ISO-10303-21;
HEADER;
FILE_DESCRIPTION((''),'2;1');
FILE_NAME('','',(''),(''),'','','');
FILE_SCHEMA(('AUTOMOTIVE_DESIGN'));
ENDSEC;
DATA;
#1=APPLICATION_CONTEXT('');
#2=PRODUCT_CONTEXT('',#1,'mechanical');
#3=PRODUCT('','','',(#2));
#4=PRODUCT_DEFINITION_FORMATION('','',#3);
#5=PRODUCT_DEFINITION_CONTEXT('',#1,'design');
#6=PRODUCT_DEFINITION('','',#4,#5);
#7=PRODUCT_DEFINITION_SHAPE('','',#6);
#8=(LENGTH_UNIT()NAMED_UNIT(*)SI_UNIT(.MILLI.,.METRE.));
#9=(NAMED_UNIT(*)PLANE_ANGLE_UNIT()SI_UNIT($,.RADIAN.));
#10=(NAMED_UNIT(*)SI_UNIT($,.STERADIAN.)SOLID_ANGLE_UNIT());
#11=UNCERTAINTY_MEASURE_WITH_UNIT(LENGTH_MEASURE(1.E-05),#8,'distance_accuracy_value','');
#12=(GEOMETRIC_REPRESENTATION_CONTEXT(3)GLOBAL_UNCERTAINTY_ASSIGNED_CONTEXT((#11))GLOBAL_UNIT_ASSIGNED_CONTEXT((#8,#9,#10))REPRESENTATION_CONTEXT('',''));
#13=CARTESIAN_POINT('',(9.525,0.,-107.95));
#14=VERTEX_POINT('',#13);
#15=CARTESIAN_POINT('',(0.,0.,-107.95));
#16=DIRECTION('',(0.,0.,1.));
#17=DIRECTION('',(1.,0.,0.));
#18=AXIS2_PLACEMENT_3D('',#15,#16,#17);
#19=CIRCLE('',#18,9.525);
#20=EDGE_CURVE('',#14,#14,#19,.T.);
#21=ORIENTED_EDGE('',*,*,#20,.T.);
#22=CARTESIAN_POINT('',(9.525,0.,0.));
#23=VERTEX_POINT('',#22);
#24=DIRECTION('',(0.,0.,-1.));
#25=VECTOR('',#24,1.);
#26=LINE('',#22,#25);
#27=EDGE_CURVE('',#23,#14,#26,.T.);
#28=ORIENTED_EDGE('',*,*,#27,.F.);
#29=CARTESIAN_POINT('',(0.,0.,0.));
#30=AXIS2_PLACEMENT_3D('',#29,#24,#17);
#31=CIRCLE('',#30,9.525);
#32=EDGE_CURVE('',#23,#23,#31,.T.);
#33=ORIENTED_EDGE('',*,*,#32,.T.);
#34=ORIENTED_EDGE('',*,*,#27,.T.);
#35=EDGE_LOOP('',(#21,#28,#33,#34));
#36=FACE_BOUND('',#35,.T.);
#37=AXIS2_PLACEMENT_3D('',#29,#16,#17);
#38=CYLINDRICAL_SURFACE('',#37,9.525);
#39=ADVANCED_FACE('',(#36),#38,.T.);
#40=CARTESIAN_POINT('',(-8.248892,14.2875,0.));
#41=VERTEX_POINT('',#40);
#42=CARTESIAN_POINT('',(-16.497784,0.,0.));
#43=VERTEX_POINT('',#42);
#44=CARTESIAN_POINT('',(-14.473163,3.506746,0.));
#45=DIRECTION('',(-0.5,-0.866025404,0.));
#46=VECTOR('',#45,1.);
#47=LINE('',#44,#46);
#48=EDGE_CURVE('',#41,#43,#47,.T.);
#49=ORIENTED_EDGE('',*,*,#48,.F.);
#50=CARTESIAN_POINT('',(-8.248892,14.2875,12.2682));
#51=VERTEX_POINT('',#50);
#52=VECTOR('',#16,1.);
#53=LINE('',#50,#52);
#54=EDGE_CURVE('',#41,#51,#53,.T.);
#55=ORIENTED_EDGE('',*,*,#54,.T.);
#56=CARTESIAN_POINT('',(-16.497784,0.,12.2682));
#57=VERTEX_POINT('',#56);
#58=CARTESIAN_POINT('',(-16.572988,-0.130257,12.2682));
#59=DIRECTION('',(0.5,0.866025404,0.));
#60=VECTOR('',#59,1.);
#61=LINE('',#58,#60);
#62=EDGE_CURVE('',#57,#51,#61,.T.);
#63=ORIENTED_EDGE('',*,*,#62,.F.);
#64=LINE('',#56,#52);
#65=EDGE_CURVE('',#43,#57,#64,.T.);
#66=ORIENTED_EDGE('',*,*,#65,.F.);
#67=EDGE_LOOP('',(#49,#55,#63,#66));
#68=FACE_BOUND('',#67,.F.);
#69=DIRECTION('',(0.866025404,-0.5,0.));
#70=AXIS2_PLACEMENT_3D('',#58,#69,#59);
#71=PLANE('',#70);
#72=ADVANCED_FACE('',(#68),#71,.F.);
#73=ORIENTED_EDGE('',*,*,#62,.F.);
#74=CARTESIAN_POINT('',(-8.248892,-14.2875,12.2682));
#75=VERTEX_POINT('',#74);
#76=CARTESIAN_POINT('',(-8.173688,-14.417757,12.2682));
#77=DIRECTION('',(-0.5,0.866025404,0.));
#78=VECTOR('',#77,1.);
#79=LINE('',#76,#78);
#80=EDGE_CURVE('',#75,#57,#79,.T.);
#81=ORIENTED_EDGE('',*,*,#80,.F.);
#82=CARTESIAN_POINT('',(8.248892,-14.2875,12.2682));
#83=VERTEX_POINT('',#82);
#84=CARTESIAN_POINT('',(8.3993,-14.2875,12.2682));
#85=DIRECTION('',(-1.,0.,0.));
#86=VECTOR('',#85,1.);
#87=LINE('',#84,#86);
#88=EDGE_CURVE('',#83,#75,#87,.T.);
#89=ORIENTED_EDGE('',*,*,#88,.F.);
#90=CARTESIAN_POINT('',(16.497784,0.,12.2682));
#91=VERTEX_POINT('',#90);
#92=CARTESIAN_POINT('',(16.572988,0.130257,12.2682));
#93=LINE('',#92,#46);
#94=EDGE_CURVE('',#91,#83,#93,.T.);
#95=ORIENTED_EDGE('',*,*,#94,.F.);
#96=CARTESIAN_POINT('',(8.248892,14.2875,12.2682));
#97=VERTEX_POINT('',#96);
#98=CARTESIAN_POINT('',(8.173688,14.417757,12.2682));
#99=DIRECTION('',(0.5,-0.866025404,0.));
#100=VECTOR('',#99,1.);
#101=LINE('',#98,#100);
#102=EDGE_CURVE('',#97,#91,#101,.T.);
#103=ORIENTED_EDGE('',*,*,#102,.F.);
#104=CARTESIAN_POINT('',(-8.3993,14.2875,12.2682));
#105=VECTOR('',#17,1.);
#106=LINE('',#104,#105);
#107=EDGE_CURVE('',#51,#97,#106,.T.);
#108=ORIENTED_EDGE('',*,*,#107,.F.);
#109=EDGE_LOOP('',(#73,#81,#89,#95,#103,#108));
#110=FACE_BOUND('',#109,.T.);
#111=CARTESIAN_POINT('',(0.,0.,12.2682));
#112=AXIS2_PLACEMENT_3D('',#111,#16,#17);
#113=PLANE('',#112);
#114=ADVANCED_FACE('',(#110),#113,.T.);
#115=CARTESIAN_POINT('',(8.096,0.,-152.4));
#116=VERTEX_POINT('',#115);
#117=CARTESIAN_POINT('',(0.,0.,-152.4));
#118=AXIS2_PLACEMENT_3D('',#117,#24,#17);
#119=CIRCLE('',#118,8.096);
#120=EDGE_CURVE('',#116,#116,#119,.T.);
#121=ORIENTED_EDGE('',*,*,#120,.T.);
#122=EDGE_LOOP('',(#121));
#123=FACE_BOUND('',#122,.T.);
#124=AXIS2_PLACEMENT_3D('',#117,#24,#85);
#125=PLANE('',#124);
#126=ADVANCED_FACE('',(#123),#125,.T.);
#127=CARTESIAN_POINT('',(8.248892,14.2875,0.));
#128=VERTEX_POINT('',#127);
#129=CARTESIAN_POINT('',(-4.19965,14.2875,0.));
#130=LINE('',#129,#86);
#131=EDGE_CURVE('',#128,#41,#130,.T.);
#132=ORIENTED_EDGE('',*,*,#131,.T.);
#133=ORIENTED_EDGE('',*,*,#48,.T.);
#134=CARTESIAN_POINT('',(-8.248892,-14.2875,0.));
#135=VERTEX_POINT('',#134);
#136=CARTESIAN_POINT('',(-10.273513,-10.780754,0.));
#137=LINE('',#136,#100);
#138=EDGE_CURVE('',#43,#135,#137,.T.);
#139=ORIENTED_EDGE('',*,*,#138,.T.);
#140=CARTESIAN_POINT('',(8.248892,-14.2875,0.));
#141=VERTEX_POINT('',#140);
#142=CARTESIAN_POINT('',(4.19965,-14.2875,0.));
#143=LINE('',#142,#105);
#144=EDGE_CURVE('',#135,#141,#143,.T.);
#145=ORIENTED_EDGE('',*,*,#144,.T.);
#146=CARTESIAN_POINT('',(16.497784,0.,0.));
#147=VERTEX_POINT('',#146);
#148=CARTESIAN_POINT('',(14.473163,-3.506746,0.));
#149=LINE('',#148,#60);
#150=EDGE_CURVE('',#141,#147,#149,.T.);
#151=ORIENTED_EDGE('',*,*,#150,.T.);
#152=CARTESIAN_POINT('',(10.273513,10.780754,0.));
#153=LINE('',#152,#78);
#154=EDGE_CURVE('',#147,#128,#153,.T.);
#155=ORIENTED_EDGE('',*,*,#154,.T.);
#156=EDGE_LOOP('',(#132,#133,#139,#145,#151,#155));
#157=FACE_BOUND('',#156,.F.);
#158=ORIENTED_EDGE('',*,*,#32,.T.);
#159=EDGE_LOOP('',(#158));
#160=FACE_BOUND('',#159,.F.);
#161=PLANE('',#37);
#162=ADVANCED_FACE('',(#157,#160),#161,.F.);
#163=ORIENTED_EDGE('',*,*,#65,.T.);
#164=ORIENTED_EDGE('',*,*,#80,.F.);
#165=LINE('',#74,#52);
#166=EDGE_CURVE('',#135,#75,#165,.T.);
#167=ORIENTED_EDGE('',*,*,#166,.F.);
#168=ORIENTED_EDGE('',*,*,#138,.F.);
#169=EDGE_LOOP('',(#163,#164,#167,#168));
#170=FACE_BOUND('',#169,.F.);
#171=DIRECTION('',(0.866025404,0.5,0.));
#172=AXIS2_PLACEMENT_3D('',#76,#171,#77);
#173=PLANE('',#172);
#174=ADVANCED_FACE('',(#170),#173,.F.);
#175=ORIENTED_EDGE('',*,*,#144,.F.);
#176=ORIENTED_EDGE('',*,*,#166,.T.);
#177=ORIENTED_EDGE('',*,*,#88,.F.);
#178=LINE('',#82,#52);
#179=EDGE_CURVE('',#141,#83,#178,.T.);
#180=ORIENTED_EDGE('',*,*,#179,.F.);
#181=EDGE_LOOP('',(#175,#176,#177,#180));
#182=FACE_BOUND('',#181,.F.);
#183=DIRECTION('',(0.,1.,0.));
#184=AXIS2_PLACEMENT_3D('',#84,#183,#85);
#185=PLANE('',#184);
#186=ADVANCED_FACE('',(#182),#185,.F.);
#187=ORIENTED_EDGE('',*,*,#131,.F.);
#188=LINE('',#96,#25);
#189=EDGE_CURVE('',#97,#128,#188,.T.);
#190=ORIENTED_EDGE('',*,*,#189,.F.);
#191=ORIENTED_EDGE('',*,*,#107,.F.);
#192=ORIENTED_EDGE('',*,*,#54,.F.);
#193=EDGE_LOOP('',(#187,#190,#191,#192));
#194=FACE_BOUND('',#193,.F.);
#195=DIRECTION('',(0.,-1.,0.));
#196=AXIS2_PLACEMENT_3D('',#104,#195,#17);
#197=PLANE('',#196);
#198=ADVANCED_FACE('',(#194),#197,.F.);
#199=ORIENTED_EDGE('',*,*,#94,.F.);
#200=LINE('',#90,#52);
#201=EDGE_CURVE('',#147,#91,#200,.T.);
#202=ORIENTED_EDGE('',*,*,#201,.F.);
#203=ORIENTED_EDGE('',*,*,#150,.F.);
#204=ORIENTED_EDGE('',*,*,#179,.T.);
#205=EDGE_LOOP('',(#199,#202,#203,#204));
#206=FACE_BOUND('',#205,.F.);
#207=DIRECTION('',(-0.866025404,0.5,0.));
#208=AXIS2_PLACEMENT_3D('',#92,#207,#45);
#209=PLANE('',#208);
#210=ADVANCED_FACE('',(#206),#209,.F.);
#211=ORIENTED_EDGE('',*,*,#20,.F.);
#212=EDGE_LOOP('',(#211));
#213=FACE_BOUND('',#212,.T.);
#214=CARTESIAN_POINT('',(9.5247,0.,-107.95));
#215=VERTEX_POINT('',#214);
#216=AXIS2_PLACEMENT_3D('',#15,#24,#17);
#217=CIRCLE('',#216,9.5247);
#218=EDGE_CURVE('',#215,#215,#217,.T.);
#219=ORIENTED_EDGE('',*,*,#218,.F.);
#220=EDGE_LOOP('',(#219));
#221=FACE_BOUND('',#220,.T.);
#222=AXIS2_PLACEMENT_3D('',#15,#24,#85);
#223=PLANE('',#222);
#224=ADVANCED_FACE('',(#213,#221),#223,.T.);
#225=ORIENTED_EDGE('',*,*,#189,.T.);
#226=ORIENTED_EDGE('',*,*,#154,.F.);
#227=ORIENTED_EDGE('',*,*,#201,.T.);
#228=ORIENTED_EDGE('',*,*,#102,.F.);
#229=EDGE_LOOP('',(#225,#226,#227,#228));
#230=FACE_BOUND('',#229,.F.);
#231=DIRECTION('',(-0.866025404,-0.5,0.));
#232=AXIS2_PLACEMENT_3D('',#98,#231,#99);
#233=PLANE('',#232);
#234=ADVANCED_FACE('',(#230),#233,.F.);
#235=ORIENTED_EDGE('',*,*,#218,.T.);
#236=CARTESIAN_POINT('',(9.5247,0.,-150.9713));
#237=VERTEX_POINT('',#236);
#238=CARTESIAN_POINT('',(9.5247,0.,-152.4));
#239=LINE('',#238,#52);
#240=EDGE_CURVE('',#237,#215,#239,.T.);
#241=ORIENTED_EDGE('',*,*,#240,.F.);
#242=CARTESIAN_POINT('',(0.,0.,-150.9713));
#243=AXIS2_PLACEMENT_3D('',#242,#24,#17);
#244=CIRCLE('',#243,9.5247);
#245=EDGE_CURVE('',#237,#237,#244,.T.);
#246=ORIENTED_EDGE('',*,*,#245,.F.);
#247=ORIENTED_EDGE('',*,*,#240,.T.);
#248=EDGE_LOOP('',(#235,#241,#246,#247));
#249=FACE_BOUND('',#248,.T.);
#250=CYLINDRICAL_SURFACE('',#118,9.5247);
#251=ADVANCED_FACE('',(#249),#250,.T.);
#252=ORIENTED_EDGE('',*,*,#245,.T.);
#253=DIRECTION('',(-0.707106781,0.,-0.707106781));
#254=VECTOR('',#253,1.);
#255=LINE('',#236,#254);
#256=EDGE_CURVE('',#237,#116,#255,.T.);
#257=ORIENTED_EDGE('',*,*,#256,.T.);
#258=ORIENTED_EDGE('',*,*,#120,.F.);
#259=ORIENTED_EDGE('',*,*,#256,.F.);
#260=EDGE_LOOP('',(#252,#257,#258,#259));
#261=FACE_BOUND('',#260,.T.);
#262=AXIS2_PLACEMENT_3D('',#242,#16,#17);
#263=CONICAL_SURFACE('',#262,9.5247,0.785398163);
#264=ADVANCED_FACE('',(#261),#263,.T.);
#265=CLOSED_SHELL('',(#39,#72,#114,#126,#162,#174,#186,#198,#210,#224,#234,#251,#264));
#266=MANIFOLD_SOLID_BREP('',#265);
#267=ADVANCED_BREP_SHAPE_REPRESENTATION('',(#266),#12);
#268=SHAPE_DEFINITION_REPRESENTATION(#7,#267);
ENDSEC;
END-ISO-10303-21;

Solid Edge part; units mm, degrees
sketch "Sketch1" plane through (0, 0, 0) normal (0, 0, 1) x (1, 0, 0)
  circle A0 centre (0, 0) radius 16.5735
  dimension "D1" = 33.147
extrude "Protrusion1" add sketch "Sketch1" along normal blind 12.2682
sketch "Sketch2" plane through (0, 0, 0) normal (0, 0, -1) x (1, 0, 0)
  circle A0 centre (0, 0) radius 9.525
extrude "Protrusion2" add sketch "Sketch2" along normal blind 152.4
sketch "Sketch3" plane through (0, 0, -152.4) normal (0, 0, -1) x (1, 0, 0)
  circle A0 centre (0, 0) radius 9.5247
extrude "Cutout1" cut sketch "Sketch3" against normal blind 44.45 flip side to cut
chamfer "Chamfer_1" distance 1.4287 angle 45 1 edges at (-9.5247, 0, -152.4)
sketch "Sketch4" plane through (0, 0, 12.2682) normal (0, 0, 1) x (1, 0, 0)
  line L0 (-8.3993, 14.2875) -> (8.3993, 14.2875)
  dimension "D1" = 28.575
extrude "Cutout2" cut sketch "Sketch4" against normal up to next material side at (0, 14.3375, 12.2682)
pattern_circular "Pattern1" count 6 over 360 about axis through (0, 0, 12.2682) along (0, 0, 1) of "Cutout2"
properties part number "201118"
